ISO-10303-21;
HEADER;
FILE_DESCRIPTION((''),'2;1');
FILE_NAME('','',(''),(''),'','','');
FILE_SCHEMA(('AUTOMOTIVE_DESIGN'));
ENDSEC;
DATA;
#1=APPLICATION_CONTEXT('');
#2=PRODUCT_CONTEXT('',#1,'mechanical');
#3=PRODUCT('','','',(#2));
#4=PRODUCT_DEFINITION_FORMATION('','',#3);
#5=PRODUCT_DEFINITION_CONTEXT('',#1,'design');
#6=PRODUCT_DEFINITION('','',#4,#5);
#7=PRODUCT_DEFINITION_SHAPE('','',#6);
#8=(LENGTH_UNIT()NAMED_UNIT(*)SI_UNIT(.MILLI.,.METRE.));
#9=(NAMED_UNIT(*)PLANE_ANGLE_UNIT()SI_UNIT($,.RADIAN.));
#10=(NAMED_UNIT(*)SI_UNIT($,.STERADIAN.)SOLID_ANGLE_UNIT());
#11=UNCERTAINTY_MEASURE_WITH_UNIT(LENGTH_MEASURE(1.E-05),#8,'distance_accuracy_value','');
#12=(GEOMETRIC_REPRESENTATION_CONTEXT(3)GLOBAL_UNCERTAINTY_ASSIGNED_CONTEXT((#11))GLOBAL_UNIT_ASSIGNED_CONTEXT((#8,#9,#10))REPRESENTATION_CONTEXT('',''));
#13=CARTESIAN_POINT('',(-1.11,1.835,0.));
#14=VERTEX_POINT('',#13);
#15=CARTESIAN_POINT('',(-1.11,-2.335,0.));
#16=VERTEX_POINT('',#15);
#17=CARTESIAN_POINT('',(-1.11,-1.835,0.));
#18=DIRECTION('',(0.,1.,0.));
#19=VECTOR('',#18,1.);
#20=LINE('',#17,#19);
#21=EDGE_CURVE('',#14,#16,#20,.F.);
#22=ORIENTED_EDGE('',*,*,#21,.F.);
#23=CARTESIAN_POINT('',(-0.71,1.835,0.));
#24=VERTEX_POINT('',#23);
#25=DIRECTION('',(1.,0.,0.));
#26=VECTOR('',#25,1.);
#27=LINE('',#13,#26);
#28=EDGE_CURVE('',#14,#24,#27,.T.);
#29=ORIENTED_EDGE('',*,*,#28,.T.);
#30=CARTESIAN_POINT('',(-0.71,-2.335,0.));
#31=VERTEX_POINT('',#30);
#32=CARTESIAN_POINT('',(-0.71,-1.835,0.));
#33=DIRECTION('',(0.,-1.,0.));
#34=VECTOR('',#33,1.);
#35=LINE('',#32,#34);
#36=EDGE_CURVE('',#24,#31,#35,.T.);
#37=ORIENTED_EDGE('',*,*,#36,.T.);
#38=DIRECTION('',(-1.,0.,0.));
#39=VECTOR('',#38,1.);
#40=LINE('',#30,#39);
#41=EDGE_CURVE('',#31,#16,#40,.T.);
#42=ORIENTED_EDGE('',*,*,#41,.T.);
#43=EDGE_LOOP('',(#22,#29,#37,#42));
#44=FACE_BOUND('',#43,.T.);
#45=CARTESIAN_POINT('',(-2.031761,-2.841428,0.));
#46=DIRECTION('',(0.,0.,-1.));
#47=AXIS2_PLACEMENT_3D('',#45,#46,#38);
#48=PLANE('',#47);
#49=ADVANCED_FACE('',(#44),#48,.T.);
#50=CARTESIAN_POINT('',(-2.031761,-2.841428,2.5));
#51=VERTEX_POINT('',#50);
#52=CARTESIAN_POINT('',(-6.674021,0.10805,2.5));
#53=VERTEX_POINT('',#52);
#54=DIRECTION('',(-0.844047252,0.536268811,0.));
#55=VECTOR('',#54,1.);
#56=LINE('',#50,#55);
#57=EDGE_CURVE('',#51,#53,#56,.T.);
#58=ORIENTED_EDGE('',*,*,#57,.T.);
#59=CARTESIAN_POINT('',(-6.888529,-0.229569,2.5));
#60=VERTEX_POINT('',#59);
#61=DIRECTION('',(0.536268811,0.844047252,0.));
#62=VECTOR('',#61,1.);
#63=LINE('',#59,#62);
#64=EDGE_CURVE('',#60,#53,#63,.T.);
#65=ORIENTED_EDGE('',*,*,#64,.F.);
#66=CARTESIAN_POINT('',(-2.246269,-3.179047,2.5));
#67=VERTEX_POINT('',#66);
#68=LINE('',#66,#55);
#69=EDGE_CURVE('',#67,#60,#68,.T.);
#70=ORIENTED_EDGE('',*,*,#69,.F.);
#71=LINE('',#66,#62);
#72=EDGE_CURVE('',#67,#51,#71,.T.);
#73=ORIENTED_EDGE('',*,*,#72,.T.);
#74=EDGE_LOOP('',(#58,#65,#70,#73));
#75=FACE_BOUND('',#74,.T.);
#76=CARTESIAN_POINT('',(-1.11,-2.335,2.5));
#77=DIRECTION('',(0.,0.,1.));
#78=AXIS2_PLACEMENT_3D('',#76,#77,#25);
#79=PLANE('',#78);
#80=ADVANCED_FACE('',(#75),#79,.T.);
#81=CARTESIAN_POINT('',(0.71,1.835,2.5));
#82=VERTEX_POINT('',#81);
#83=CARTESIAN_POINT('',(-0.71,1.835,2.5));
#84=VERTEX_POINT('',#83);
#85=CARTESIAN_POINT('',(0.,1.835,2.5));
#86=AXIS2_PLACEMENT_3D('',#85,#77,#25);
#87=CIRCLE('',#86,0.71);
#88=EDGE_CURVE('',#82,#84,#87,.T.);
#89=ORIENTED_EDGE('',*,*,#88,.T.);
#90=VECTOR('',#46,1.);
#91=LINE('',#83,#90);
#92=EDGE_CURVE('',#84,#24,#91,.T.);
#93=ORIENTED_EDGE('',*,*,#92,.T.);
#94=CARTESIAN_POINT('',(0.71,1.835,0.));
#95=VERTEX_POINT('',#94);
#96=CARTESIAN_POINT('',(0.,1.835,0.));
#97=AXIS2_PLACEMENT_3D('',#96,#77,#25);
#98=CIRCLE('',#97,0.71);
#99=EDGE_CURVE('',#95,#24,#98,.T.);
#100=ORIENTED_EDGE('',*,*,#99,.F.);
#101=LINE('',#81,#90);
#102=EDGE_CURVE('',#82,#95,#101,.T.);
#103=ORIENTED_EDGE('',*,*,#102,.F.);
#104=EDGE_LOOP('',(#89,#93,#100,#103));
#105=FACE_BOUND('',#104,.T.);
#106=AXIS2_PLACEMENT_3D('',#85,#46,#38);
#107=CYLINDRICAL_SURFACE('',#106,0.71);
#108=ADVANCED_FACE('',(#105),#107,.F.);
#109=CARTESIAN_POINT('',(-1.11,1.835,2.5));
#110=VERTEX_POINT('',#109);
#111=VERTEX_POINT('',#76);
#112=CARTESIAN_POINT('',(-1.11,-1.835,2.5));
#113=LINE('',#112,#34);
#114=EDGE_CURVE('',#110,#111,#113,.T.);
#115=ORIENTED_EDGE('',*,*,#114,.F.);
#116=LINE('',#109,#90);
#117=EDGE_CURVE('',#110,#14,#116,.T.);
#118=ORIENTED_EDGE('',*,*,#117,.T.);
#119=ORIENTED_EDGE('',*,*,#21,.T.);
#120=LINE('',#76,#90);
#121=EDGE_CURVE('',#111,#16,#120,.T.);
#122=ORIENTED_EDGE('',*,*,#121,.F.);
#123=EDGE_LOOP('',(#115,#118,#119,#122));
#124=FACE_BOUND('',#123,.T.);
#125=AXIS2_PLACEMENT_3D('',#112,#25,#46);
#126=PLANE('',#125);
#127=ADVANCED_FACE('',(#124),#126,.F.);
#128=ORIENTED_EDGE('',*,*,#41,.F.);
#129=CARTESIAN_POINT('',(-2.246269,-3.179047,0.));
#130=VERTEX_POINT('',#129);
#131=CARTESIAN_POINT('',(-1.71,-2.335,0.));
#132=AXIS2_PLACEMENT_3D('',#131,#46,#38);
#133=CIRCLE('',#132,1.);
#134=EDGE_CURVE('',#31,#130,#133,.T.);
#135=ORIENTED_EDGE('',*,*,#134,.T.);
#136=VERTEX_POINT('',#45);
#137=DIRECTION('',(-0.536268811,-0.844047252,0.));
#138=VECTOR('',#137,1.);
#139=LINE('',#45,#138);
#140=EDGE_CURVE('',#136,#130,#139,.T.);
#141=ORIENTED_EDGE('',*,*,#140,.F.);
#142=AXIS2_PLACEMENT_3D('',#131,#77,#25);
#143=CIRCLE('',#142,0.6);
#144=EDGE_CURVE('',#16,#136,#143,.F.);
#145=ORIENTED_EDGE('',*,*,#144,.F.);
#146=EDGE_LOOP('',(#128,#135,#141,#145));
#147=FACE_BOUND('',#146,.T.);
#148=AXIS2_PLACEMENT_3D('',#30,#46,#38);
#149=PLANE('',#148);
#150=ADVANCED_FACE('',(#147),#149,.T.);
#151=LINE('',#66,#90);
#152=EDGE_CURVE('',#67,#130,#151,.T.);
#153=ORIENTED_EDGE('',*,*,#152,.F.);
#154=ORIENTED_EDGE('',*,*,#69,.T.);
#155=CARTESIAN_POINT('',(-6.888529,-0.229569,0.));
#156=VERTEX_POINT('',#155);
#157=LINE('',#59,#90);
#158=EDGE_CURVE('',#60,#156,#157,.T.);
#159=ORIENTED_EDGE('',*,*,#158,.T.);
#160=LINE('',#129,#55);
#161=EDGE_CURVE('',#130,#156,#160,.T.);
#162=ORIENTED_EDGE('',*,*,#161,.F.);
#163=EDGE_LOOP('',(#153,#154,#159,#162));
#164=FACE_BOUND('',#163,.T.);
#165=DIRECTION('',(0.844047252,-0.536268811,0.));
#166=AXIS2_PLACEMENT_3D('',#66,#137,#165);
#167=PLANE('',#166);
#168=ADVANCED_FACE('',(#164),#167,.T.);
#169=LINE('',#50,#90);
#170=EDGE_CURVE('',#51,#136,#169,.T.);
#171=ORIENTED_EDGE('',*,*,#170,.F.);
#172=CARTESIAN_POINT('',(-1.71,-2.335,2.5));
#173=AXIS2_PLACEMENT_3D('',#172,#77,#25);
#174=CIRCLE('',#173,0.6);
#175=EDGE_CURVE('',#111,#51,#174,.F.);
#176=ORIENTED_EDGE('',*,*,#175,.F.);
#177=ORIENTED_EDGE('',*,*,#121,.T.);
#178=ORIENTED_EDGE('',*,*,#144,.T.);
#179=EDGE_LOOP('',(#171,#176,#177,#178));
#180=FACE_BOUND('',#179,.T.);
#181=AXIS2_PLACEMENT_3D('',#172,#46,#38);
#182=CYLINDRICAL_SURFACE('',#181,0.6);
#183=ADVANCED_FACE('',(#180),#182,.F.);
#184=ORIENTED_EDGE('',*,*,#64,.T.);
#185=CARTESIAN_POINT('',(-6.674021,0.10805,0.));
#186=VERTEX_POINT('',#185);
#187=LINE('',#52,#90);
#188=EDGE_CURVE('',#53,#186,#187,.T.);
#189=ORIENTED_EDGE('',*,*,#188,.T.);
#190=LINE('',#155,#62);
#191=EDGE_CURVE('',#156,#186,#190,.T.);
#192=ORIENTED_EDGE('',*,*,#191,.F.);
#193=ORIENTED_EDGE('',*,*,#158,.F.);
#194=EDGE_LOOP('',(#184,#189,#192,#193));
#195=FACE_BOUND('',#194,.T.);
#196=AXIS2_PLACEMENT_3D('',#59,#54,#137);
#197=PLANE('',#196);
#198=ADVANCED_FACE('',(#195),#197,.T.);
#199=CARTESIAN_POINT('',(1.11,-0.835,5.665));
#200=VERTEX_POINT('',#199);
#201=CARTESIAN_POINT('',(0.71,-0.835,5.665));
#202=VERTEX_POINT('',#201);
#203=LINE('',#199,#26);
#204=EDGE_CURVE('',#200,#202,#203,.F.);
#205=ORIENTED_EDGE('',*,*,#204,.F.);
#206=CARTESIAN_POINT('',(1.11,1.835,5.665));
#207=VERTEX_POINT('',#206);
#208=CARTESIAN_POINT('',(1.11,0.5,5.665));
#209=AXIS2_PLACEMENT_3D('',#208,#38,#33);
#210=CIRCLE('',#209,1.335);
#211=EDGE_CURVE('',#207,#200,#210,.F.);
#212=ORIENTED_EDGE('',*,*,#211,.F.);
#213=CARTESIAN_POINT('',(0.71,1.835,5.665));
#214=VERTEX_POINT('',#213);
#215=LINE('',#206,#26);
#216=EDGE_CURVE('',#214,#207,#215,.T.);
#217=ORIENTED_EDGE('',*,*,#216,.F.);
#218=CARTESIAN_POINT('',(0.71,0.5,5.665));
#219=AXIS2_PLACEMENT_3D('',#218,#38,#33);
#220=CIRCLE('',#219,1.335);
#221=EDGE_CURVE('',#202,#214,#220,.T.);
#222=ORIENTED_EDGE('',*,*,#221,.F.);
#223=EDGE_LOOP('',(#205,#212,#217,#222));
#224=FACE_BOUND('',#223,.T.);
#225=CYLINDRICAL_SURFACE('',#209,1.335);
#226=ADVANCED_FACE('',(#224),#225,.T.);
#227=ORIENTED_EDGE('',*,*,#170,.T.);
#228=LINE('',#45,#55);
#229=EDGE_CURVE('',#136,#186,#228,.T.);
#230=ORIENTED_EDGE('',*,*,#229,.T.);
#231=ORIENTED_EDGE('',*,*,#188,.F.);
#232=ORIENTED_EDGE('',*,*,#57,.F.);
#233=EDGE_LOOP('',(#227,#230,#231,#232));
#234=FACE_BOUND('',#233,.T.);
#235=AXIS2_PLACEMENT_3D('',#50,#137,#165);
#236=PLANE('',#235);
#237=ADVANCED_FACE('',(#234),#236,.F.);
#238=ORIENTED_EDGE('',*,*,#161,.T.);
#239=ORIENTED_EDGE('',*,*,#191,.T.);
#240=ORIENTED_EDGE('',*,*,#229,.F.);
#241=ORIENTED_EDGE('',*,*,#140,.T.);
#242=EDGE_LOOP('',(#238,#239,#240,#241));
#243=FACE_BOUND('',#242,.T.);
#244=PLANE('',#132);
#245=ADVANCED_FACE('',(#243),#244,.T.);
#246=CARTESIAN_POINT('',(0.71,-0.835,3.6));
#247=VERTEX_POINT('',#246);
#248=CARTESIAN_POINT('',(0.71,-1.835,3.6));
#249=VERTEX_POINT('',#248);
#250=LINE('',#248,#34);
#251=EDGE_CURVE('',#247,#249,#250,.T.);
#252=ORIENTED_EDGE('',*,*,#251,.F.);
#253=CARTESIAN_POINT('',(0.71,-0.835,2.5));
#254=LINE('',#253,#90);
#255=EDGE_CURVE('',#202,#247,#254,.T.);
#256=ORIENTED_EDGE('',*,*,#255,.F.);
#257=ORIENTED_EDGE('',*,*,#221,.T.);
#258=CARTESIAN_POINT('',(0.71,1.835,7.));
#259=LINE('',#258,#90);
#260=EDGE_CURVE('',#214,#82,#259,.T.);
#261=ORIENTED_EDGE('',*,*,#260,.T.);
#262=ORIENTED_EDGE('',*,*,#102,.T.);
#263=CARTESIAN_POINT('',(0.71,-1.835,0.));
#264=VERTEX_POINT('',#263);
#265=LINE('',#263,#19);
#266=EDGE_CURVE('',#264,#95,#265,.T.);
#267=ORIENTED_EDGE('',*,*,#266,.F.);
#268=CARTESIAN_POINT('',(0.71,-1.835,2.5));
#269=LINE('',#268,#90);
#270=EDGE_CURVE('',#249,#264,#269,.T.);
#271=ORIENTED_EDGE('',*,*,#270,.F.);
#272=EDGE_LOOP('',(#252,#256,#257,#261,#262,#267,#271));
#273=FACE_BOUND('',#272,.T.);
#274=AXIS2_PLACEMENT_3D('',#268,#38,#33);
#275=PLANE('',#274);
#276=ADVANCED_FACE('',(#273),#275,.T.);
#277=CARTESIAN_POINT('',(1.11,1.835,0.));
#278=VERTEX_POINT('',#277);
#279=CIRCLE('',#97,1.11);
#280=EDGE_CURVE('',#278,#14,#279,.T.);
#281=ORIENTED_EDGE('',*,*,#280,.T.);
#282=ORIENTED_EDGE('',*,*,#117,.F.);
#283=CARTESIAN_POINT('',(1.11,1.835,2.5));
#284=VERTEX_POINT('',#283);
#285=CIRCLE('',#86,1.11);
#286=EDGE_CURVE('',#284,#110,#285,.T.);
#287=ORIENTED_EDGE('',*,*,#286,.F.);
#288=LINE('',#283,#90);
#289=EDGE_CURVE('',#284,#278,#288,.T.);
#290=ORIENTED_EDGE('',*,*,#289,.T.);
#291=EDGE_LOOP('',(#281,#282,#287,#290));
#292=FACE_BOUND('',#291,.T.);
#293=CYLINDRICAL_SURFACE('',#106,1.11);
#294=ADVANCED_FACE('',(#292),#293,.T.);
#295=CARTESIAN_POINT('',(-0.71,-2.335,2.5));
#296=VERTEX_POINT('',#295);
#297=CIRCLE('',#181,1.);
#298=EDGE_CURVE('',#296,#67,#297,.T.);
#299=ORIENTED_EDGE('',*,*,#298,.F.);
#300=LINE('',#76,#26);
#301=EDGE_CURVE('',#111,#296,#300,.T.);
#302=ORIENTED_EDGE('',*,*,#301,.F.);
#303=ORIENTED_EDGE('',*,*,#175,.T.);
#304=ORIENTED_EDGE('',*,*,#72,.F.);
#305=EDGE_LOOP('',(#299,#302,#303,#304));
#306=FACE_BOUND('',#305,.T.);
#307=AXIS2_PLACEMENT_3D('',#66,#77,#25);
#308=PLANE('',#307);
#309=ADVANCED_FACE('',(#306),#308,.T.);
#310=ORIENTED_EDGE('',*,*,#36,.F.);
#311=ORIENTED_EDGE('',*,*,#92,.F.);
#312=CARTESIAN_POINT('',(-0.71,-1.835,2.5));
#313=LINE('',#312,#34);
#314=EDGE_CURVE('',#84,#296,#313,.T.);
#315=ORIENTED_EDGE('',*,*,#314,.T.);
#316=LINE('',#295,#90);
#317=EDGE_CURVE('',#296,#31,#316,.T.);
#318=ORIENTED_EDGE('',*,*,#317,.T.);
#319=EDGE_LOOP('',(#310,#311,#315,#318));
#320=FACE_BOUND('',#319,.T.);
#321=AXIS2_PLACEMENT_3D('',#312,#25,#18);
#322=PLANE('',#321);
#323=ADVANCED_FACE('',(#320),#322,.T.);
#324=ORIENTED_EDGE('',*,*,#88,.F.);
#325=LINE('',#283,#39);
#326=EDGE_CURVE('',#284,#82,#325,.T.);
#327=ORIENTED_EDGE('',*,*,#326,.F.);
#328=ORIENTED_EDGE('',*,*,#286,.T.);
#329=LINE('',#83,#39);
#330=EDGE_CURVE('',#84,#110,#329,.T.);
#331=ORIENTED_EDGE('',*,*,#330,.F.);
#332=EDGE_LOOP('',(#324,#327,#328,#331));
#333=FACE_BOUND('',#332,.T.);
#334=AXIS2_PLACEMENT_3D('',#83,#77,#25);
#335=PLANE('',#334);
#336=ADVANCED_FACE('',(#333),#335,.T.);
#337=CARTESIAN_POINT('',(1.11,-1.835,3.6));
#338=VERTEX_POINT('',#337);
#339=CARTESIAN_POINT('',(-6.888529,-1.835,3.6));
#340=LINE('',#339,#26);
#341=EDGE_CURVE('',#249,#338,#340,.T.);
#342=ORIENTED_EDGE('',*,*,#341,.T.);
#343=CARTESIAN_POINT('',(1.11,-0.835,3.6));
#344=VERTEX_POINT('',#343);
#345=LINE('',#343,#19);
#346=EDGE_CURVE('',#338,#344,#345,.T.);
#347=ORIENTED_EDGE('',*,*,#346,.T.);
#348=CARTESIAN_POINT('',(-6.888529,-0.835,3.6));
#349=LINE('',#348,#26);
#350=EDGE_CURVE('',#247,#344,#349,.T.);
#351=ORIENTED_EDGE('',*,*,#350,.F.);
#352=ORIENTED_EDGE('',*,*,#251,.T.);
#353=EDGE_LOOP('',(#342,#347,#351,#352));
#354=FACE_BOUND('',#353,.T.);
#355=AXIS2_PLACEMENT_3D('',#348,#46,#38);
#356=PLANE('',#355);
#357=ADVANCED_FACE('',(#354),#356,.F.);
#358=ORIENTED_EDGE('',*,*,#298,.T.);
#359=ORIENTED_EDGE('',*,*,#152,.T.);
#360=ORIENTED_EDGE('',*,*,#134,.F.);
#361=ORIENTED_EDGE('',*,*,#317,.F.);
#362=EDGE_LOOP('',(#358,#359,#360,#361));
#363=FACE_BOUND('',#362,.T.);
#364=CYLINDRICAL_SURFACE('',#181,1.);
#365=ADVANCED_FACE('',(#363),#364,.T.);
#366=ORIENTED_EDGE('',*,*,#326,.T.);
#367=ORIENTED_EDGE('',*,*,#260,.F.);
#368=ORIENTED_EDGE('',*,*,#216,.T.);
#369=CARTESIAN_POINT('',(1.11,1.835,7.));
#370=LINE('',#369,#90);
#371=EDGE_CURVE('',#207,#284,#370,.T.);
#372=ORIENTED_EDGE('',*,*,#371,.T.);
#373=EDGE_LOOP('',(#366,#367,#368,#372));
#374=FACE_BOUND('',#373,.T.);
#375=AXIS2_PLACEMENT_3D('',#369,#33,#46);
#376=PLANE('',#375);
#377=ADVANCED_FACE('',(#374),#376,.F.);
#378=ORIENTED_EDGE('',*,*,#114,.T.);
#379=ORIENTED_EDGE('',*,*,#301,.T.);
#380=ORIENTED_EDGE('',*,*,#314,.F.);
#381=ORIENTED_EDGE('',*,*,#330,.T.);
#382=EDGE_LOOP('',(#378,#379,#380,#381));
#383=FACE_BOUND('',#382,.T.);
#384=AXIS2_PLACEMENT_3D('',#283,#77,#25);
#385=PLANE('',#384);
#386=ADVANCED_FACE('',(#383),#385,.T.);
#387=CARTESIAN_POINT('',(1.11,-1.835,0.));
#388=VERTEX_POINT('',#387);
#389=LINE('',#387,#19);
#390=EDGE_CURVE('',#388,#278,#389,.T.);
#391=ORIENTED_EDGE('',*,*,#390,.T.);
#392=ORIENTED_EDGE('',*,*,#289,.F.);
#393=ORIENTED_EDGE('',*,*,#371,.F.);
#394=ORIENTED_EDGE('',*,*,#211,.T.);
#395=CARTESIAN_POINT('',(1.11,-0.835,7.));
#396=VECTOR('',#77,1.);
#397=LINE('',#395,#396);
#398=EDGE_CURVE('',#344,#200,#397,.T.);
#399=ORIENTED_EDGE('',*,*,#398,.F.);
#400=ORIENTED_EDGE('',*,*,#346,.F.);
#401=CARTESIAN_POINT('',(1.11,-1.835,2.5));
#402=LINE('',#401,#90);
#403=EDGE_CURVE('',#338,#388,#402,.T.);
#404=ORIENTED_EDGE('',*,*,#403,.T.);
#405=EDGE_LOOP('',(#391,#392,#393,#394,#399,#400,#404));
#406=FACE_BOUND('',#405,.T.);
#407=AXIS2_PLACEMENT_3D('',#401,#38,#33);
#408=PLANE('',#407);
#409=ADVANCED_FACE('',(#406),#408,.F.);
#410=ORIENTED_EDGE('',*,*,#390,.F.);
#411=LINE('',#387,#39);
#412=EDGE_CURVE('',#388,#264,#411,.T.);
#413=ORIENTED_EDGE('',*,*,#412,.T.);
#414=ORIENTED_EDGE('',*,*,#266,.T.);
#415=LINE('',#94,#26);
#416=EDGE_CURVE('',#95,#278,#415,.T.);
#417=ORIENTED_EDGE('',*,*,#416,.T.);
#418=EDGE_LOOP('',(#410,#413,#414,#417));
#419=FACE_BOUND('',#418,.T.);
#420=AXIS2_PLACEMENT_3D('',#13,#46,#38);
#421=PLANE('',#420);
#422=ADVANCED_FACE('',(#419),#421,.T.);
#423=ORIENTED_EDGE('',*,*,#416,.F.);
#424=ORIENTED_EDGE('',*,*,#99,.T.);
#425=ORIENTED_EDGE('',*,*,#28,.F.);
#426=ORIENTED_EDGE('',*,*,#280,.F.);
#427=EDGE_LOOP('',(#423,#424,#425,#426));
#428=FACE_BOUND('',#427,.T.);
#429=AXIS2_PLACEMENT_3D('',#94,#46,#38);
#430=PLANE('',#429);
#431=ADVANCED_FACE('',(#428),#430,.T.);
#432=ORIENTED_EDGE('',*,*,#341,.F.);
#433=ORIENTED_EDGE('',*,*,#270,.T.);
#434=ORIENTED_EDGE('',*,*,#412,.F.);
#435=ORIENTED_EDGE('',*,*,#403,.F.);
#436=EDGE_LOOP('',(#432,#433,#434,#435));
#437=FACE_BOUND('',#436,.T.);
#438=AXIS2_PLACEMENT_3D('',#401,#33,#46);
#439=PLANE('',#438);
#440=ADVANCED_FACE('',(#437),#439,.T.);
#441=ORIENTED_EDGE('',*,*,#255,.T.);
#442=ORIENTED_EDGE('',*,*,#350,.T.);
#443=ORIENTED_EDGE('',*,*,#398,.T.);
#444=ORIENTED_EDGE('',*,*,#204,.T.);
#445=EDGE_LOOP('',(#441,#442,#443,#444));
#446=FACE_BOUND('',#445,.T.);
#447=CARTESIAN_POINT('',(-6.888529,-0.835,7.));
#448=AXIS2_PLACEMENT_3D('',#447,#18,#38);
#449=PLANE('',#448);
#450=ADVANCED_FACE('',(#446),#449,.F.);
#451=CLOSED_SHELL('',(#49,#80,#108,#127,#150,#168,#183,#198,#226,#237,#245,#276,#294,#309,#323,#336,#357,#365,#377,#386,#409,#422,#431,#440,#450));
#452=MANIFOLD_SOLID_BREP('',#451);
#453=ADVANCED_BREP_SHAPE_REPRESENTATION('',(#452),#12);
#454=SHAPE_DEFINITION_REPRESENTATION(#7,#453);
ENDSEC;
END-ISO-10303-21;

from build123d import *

# Parameters (mm, degrees)
BASE_FLANGE2_DEPTH  = 2.5
SKETCH10_W          = 0.4
SKETCH10_H          = 3.67
BOSS_EXTRUDE1_DEPTH = 4.5
SKETCH11_W          = 3.4
SKETCH11_H          = 1
CUT_EXTRUDE1_DEPTH  = 12.139958989
FILLET1_RADIUS      = 1.335
FILLET1_LENGTH      = 0.4


# Sheet-metal steps are written as plain solids
with BuildPart() as part:
    # Sketch1 → Base-Flange2 (new body)
    with BuildSketch(Plane.XY):
        with BuildLine():
            Line((-6.888528694, -0.229568793), (-2.246268811, -3.179047252))
            ThreePointArc((-2.246268811, -3.179047252), (-1.228475759, -3.211432773), (-0.71, -2.335))
            Line((-0.71, -2.335), (-0.71, -1.835))
            Line((-0.71, -1.835), (-0.71, 1.835))
            ThreePointArc((-0.71, 1.835), (0, 2.545), (0.71, 1.835))
            Line((0.71, 1.835), (0.71, -1.835))
            Line((0.71, -1.835), (1.11, -1.835))
            Line((1.11, -1.835), (1.11, 1.835))
            ThreePointArc((1.11, 1.835), (0, 2.945), (-1.11, 1.835))
            Line((-1.11, 1.835), (-1.11, -1.835))
            Line((-1.11, -1.835), (-1.11, -2.335))
            ThreePointArc((-1.11, -2.335), (-1.421085455, -2.860859664), (-2.031761286, -2.841428351))
            Line((-2.031761286, -2.841428351), (-6.67402117, 0.108050107))
            Line((-6.67402117, 0.108050107), (-6.888528694, -0.229568793))
        make_face()
    extrude(amount=BASE_FLANGE2_DEPTH)

    # Sketch10 → Boss-Extrude1 (add)
    with BuildSketch(Plane.XY.offset(2.5)):
        with Locations((0.91, 0)):
            Rectangle(SKETCH10_W, SKETCH10_H)
    extrude(amount=BOSS_EXTRUDE1_DEPTH)

    # Sketch11 → Cut-Extrude1 (cut, through all)
    with BuildSketch(Plane(origin=(1.11, 0, 0), x_dir=(0, 0, -1), z_dir=(1, 0, 0))):
        with Locations((-5.3, -1.335)):
            Rectangle(SKETCH11_W, SKETCH11_H)
    extrude(amount=-CUT_EXTRUDE1_DEPTH, mode=Mode.SUBTRACT)

    # Fillet1: full round fillet: the end face becomes a half cylinder, R = half its width
    fillet1_face = Plane((0.91, 0.5, 7), x_dir=(-1, 0, 0), z_dir=(0, 0, 1))  # on the end face: x along it, z out of the body
    fillet1_slab = fillet1_face.offset(-FILLET1_RADIUS / 2) * Box(FILLET1_LENGTH, 2 * FILLET1_RADIUS, FILLET1_RADIUS, mode=Mode.PRIVATE)  # the body's end, R deep
    fillet1_round = Plane((0.91, 0.5, 5.665), x_dir=(0, 0, 1), z_dir=(-1, 0, 0)) * Cylinder(FILLET1_RADIUS, FILLET1_LENGTH, mode=Mode.PRIVATE)  # its axis R under the face
    add(fillet1_slab - fillet1_round, mode=Mode.SUBTRACT)


solid = part.part
